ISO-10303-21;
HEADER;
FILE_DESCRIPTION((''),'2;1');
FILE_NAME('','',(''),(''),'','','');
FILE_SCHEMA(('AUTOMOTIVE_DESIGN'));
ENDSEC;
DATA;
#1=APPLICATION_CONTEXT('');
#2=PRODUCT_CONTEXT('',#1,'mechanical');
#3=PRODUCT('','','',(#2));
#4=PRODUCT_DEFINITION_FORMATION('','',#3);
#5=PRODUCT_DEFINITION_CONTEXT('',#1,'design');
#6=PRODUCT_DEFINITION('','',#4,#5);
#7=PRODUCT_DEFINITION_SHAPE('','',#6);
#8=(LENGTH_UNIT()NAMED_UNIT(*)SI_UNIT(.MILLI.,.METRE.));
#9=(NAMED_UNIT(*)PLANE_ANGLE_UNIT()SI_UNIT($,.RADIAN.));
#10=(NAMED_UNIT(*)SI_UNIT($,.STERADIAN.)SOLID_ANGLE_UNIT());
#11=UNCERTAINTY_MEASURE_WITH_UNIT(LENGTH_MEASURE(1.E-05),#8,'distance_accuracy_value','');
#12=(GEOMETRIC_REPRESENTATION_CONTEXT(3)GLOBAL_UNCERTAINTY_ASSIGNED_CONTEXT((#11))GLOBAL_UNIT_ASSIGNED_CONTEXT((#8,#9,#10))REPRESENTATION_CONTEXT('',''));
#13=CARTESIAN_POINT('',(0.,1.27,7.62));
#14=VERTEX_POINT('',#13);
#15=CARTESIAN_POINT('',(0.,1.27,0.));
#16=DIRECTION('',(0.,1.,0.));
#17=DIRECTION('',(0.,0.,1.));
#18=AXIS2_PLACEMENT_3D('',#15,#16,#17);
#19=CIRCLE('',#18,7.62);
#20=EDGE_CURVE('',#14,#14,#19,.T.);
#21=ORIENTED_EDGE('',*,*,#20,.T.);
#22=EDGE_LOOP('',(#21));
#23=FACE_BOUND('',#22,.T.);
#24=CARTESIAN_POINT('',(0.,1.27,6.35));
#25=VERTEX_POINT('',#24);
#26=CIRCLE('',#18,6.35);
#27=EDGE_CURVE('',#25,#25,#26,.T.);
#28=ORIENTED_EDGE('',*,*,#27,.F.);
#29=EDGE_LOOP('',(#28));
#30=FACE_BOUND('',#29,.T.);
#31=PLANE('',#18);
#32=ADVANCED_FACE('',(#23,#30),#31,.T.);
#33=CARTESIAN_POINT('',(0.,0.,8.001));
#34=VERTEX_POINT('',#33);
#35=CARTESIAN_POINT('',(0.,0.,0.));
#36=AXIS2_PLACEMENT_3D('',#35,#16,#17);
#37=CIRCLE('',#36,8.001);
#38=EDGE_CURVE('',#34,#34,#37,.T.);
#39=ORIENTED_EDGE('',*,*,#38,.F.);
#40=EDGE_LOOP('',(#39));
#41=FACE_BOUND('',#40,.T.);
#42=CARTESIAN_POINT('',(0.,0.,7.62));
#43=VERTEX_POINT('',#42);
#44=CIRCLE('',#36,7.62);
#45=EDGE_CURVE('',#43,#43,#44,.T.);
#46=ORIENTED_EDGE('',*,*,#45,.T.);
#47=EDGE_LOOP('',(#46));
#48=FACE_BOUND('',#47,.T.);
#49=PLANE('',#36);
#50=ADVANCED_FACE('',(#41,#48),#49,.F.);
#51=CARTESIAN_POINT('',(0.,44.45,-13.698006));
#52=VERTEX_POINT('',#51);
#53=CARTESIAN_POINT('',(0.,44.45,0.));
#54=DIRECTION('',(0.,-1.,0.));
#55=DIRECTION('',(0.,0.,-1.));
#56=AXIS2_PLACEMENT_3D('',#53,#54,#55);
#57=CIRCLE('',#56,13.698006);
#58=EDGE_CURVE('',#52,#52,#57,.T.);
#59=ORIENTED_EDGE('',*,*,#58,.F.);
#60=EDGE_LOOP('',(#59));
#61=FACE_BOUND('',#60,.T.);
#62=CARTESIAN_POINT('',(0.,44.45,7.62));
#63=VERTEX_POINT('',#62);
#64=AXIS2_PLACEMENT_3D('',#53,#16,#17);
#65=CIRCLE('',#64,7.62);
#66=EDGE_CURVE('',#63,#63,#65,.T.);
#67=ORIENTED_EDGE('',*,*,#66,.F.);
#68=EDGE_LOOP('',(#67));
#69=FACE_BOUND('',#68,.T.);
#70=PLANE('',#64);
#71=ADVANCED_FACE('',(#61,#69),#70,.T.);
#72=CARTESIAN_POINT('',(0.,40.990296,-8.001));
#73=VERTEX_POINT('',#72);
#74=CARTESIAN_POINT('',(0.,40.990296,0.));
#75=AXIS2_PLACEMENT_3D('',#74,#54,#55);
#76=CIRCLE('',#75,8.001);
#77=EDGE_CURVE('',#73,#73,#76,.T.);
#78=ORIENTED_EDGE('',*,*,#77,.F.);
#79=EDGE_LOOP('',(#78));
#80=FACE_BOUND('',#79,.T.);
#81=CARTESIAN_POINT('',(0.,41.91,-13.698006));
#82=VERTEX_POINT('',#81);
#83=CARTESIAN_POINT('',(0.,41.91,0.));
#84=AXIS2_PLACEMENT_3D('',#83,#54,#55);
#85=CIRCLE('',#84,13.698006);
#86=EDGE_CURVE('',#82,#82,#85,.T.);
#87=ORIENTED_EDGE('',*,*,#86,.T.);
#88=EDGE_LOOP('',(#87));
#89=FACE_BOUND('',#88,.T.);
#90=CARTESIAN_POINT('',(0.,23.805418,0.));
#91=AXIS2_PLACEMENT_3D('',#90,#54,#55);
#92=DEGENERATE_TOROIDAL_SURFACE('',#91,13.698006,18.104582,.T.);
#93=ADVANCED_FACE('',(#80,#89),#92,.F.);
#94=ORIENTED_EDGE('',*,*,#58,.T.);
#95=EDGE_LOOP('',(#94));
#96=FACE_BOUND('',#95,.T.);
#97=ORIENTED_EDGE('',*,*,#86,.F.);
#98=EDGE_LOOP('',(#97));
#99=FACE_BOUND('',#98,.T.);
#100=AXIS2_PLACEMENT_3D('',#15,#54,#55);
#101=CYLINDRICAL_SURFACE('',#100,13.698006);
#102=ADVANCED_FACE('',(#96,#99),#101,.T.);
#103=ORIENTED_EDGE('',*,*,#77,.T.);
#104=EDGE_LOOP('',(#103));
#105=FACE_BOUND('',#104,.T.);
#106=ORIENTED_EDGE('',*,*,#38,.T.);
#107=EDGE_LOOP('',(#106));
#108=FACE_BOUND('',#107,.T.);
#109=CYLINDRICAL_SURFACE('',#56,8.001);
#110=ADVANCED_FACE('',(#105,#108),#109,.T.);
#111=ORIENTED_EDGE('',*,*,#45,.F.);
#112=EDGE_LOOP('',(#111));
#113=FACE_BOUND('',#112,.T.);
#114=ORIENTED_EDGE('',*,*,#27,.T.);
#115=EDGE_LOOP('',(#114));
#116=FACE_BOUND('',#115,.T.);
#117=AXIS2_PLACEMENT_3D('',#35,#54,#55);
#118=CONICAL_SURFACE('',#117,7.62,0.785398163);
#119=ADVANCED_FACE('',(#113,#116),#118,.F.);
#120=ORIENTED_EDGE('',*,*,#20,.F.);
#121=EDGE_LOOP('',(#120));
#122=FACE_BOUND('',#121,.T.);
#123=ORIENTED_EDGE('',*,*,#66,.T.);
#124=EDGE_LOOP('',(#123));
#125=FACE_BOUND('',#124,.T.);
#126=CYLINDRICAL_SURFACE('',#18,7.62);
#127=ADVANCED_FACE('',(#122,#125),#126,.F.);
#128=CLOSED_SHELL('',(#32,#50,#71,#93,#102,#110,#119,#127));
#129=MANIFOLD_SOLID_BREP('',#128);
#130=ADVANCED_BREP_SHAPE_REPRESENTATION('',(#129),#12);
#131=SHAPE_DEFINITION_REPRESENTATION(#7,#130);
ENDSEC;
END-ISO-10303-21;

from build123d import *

# Parameters (mm, degrees)
SKETCH1_R           = 8.001
BOSS_EXTRUDE1_DEPTH = 44.45
SKETCH2_R           = 7.62
CUT_EXTRUDE1_DEPTH  = 43.18
SKETCH3_R           = 6.35
CUT_EXTRUDE2_DEPTH  = 1.27
CHAMFER2_SIZE       = 1.27


with BuildPart() as part:
    # Sketch1 → Boss-Extrude1 (new body)
    with BuildSketch(Plane(origin=(0, 0, 0), x_dir=(1, 0, 0), z_dir=(0, 1, 0))):
        with Locations(Location((0, 0, 0), (0, 0, 270))):
            Circle(SKETCH1_R)
    extrude(amount=BOSS_EXTRUDE1_DEPTH)

    # Sketch2 → Cut-Extrude1 (cut)
    with BuildSketch(Plane(origin=(0, 44.45, 0), x_dir=(1, 0, 0), z_dir=(0, 1, 0))):
        with Locations(Location((0, 0, 0), (0, 0, 270))):
            Circle(SKETCH2_R)
    extrude(amount=-CUT_EXTRUDE1_DEPTH, mode=Mode.SUBTRACT)

    # Sketch3 → Cut-Extrude2 (cut)
    with BuildSketch(Plane(origin=(0, 1.27, 0), x_dir=(1, 0, 0), z_dir=(0, 1, 0))):
        with Locations(Location((0, 0, 0), (0, 0, 270))):
            Circle(SKETCH3_R)
    extrude(amount=-CUT_EXTRUDE2_DEPTH, mode=Mode.SUBTRACT)

    # Chamfer2
    chamfer2_edges = [part.edges().sort_by_distance(p)[0] for p in [
        (0, 0, -6.35),
    ]]
    chamfer(chamfer2_edges, length=CHAMFER2_SIZE - 0.0001)  # a hair under: the kernel refuses the full size

    # Sketch5 → Revolve1 (revolve)
    with BuildSketch(Plane.XY, mode=Mode.PRIVATE) as revolve1_sk:
        with BuildLine():
            Line((8.001, 44.45), (13.698005601, 44.45))
            Line((13.698005601, 44.45), (13.698005601, 41.91))
            ThreePointArc((13.698005601, 41.91), (10.812623084, 41.67859503), (8.001, 40.990295557))
            Line((8.001, 40.990295557), (8.001, 44.45))
        make_face()
    revolve(revolve1_sk.sketch.rotate(Axis((0, 1.27, 0), (0, 1, 0)), 90), axis=Axis((0, 1.27, 0), (0, 1, 0)))


solid = part.part
